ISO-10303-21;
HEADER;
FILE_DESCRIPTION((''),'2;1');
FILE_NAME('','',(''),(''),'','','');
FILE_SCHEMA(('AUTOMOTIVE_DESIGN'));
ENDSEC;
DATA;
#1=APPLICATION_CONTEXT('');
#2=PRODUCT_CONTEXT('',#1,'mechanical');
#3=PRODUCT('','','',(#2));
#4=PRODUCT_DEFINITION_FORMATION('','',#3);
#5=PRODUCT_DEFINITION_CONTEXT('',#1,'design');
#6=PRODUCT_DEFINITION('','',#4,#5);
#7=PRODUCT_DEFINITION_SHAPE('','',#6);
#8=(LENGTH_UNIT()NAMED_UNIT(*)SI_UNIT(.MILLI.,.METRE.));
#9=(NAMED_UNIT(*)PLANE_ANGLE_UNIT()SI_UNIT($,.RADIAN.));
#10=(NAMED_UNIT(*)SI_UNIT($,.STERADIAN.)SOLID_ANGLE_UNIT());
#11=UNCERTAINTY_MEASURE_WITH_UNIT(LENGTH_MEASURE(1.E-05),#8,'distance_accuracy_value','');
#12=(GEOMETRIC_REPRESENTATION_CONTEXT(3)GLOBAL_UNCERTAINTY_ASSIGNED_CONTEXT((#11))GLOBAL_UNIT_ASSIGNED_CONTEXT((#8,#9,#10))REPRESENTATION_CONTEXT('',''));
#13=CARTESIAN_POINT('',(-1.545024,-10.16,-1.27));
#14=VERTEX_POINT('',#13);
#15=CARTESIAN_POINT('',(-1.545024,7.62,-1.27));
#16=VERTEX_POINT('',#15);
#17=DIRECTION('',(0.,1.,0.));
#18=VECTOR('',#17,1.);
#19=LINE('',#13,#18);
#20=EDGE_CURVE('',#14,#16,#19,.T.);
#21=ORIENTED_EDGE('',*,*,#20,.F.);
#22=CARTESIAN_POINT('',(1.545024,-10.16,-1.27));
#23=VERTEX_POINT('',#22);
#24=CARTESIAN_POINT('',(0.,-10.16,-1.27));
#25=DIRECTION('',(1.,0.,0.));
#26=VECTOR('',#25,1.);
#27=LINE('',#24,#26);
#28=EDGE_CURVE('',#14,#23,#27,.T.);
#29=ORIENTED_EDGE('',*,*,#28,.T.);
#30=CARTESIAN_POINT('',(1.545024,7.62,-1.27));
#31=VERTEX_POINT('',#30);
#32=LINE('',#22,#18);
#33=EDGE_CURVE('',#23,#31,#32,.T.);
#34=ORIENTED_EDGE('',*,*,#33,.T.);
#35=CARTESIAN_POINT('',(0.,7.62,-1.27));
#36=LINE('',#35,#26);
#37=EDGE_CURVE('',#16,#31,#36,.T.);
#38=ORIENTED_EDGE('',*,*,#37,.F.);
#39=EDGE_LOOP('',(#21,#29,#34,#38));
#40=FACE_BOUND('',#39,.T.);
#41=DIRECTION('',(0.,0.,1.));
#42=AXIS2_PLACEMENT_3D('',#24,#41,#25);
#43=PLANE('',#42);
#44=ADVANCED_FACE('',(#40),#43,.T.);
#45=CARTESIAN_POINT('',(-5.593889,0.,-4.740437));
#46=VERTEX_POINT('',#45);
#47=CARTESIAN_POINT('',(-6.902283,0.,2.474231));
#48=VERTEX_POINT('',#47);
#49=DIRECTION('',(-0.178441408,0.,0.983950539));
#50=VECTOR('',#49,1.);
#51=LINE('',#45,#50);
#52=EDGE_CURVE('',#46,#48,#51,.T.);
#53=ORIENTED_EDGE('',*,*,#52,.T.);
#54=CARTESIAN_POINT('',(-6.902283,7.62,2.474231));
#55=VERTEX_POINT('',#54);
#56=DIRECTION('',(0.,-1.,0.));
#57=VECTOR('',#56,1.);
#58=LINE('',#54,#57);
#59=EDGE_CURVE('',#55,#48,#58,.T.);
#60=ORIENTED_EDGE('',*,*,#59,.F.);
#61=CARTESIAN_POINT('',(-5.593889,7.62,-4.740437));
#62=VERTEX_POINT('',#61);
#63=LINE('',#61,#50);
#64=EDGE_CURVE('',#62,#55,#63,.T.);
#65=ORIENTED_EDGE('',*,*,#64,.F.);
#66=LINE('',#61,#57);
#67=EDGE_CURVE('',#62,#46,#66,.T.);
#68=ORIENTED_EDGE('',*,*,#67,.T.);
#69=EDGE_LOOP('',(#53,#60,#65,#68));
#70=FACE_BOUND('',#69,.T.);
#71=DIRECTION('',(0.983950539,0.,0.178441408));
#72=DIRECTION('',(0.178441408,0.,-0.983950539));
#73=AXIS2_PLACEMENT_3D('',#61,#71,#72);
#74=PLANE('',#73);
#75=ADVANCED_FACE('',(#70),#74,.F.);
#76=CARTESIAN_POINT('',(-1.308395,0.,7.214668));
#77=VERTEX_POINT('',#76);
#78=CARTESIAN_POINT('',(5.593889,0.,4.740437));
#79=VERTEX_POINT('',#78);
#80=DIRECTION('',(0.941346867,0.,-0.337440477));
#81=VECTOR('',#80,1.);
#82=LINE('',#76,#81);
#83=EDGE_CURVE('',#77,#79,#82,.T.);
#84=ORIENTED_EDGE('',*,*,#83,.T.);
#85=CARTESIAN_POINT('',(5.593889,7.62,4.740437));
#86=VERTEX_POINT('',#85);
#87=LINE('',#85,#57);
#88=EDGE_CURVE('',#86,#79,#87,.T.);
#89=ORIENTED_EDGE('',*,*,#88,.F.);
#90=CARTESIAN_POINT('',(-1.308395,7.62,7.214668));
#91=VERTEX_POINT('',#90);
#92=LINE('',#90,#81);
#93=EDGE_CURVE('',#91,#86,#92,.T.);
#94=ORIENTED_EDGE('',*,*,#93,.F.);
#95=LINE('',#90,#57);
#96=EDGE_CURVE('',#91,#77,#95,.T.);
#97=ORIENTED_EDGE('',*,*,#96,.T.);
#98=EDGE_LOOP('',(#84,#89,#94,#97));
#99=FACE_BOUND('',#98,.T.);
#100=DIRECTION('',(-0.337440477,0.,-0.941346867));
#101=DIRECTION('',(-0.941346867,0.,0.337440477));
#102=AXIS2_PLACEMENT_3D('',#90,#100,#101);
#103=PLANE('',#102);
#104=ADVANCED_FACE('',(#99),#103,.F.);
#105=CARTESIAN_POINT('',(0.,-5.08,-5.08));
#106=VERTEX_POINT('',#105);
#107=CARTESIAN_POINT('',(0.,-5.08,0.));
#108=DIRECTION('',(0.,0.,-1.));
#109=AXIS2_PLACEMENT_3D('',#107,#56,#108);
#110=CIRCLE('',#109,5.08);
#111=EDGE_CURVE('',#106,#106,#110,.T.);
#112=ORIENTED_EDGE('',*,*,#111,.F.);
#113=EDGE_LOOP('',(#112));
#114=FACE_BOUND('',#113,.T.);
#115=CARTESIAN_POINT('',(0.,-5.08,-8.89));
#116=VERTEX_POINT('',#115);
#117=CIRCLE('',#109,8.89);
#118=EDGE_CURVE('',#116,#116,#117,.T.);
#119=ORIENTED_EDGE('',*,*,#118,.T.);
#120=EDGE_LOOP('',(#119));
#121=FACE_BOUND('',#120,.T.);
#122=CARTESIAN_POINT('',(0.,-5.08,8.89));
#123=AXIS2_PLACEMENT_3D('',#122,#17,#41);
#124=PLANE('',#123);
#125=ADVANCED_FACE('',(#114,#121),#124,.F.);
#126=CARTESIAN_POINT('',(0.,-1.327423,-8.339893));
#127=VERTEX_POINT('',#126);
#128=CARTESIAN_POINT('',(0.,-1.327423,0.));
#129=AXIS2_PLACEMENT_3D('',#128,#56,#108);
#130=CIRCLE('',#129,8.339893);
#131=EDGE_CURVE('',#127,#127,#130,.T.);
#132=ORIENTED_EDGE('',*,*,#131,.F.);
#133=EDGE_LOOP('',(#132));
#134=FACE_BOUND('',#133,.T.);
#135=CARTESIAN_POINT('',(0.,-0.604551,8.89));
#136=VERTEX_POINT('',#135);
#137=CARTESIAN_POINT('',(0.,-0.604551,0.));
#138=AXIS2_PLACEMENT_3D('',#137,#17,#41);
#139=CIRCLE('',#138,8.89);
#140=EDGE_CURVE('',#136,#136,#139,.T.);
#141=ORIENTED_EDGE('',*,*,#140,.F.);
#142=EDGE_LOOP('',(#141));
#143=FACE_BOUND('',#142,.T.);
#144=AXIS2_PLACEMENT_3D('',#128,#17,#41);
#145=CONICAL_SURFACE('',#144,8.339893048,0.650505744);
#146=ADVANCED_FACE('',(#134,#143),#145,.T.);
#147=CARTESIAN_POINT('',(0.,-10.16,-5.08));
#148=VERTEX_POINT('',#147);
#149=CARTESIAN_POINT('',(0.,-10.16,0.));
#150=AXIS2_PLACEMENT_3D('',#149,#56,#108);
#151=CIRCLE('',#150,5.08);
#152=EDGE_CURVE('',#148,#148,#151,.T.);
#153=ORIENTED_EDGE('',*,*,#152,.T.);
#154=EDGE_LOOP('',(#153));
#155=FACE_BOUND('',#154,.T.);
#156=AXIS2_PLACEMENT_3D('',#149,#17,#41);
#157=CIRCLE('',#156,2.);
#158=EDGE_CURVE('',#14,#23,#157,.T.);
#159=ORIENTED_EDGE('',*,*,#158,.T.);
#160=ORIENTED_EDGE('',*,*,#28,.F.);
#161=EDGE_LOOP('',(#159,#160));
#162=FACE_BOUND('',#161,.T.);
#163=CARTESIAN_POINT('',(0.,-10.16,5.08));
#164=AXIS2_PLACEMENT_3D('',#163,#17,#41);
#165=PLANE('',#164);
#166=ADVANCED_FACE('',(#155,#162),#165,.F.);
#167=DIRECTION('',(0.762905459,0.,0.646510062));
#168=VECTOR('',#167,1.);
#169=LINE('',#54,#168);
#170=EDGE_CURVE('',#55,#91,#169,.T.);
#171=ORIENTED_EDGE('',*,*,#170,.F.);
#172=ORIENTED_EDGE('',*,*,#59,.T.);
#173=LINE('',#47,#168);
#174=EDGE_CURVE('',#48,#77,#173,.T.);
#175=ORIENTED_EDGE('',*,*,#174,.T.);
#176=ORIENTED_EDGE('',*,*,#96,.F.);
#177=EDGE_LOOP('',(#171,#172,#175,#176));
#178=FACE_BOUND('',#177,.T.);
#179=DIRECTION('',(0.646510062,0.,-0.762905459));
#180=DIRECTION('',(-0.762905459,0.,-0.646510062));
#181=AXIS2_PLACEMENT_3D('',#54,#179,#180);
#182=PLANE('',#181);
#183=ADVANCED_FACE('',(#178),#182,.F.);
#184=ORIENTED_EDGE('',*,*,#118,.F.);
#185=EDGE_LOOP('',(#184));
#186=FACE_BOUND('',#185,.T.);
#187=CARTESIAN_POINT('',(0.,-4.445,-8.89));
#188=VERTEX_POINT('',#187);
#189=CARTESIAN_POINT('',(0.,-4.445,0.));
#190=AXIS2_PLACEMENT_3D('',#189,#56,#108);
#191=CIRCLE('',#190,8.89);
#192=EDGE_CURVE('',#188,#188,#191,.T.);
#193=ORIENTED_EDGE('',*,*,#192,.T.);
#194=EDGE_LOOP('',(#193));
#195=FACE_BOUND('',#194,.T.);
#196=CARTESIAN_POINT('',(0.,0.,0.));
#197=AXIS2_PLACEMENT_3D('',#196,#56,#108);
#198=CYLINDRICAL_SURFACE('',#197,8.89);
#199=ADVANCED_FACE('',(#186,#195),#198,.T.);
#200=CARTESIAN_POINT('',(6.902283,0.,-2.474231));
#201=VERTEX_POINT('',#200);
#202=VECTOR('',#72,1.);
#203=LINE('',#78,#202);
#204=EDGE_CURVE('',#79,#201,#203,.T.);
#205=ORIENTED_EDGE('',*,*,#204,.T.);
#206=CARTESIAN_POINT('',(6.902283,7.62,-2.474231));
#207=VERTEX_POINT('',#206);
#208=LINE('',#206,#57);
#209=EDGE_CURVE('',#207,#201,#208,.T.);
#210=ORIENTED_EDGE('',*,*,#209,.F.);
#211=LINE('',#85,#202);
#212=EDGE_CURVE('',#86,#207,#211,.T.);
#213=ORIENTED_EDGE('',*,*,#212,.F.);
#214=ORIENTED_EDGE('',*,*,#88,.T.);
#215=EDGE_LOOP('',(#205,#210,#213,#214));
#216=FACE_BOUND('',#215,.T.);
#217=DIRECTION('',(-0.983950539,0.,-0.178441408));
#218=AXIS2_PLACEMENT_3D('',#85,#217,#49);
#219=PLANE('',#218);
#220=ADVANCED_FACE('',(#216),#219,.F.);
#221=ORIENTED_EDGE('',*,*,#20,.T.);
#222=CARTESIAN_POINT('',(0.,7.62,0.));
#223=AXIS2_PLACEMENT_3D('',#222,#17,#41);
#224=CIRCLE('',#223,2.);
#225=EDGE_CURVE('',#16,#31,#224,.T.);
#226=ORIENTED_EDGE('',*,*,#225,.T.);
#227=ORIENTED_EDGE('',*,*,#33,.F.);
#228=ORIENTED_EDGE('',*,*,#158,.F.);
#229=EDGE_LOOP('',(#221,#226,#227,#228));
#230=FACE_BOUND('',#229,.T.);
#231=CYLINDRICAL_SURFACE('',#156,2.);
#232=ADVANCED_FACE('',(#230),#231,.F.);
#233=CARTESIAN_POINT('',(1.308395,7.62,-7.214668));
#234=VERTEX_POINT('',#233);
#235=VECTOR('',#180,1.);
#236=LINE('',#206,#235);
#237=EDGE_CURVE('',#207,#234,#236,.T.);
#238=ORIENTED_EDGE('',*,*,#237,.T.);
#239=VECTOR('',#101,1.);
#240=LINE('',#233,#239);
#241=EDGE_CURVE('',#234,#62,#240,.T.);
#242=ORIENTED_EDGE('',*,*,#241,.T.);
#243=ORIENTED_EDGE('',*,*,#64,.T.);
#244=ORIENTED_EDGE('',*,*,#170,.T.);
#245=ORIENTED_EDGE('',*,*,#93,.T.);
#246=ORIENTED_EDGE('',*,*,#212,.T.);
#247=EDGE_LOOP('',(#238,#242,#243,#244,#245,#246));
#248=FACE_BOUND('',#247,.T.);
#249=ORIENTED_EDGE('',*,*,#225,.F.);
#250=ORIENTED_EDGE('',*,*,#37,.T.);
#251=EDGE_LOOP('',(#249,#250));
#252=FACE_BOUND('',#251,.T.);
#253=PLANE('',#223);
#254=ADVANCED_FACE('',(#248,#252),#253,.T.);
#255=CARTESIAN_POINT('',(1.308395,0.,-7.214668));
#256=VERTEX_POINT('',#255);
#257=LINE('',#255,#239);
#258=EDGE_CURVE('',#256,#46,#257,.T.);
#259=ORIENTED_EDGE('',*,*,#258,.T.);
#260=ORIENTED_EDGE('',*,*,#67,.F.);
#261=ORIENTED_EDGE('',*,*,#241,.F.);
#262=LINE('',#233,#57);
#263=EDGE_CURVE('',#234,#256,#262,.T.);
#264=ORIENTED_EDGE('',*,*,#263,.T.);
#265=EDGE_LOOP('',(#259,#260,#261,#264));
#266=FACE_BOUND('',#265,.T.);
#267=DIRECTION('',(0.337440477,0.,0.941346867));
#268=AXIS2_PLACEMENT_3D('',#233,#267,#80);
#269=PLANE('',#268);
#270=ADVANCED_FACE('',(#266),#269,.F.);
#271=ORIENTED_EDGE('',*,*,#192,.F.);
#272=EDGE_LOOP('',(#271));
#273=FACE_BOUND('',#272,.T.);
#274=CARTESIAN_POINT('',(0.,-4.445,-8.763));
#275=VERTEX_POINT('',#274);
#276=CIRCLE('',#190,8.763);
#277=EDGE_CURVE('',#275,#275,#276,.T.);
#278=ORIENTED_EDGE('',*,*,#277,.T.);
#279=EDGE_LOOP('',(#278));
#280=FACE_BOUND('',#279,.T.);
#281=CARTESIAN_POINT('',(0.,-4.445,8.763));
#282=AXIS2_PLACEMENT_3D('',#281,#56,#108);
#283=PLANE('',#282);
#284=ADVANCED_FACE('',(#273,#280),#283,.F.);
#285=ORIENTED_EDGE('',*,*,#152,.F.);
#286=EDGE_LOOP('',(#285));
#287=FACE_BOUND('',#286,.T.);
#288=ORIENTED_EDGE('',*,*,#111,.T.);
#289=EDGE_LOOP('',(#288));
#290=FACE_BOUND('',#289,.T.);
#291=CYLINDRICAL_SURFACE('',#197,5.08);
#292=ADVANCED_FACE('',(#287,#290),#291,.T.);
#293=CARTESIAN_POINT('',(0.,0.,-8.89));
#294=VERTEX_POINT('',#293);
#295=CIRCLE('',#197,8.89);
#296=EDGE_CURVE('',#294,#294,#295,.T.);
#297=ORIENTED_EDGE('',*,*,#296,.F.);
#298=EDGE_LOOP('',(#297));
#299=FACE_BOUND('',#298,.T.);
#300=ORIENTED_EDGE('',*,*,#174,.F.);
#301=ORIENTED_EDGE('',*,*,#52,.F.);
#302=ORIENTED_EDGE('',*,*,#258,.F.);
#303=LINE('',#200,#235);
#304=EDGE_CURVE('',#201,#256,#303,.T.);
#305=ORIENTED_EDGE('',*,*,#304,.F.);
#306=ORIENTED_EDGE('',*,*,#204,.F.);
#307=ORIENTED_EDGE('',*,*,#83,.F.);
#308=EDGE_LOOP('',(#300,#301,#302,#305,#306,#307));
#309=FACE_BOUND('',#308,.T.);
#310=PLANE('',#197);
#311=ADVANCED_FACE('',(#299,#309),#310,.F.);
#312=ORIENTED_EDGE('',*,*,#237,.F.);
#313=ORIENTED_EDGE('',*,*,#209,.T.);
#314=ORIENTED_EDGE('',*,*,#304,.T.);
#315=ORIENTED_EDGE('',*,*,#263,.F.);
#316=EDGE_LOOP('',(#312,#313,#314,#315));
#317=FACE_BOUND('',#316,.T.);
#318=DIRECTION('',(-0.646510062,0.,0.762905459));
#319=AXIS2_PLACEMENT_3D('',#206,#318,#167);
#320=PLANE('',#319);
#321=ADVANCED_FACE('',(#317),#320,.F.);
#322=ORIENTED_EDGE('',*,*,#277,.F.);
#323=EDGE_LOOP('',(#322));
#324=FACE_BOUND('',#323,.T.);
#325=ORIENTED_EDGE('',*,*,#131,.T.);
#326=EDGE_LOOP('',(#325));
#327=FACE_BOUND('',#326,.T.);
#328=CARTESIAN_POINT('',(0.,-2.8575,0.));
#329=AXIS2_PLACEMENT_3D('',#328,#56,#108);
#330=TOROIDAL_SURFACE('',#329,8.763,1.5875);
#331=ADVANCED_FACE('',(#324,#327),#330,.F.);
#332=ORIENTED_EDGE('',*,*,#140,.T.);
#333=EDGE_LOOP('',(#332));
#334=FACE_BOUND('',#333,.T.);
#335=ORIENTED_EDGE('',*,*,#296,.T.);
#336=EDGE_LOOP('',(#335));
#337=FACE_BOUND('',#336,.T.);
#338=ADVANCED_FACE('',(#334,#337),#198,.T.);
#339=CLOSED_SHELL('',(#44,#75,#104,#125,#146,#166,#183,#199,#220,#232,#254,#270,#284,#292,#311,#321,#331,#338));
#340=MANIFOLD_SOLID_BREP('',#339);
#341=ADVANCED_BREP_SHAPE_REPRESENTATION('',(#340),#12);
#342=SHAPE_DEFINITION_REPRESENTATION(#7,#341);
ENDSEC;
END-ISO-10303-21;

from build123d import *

# Parameters (mm, degrees)
BOSS_EXTRUDE1_DEPTH    = 7.62
MOTOR_SHAFT_DEPTH      = 17.164461018
MOTOR_SHAFT_DEPTH_BACK = 17.164461018


with BuildPart() as part:
    # Sketch1 → Boss-Extrude1 (new body)
    with BuildSketch(Plane(origin=(0, 0, 0), x_dir=(1, 0, 0), z_dir=(0, 1, 0))):
        Polygon((6.902283212, 2.474231151), (1.308394574, 7.214668182), (-5.593888638, 4.74043703), (-6.902283212, -2.474231151), (-1.308394574, -7.214668182), (5.593888638, -4.74043703), align=None)
    extrude(amount=BOSS_EXTRUDE1_DEPTH)

    # Sketch5 → Revolve1 (revolve)
    with BuildSketch(Plane(origin=(0, 0, 0), x_dir=(0, 0, -1), z_dir=(1, 0, 0)), mode=Mode.PRIVATE) as revolve1_sk:
        with BuildLine():
            Line((0, 0), (-8.89, 0))
            Line((-8.89, 0), (-8.89, -1.27))
            Line((-8.89, -1.27), (-8.763, -1.27))
            ThreePointArc((-8.763, -1.27), (-7.1755, -2.8575), (-8.763, -4.445))
            Line((-8.763, -4.445), (-8.89, -4.445))
            Line((-8.89, -4.445), (-8.89, -5.08))
            Line((-8.89, -5.08), (-5.08, -5.08))
            Line((-5.08, -5.08), (-5.08, -10.16))
            Line((-5.08, -10.16), (0, -10.16))
            Line((0, -10.16), (0, -5.08))
            Line((0, -5.08), (0, 0))
        make_face()
    revolve(revolve1_sk.sketch.rotate(Axis((0, 0, 0), (0, 1, 0)), 180), axis=Axis((0, 0, 0), (0, 1, 0)))

    # Chamfer5: read off the stored shape, not the designer's step
    # Chamfer5 outline → Chamfer5 (revolve, cut)
    with BuildSketch(Plane.XY):
        Polygon((8.339893048, -1.32742263), (8.763, -1.32742263), (8.763, -1.27), (8.89, -1.27), (8.89, -0.604551432), align=None)
    revolve(axis=Axis((0, 0, 0), (0, 1, 0)), mode=Mode.SUBTRACT)

    # Sketch10 → motor shaft (cut, two sides: drawn at the far end of the back side and taken through both)
    with BuildSketch(Plane(origin=(0, 0, 0), x_dir=(1, 0, 0), z_dir=(0, 1, 0)).offset(-MOTOR_SHAFT_DEPTH_BACK)):
        with BuildLine():
            Line((1.545024355, 1.27), (-1.545024355, 1.27))
            ThreePointArc((-1.545024355, 1.27), (-0.674518883, -1.882823553), (2.000000064, 0))
            ThreePointArc((2.000000064, 0), (1.882823553, 0.674518883), (1.545024355, 1.27))
        make_face()
    extrude(amount=MOTOR_SHAFT_DEPTH + MOTOR_SHAFT_DEPTH_BACK, mode=Mode.SUBTRACT)


solid = part.part
